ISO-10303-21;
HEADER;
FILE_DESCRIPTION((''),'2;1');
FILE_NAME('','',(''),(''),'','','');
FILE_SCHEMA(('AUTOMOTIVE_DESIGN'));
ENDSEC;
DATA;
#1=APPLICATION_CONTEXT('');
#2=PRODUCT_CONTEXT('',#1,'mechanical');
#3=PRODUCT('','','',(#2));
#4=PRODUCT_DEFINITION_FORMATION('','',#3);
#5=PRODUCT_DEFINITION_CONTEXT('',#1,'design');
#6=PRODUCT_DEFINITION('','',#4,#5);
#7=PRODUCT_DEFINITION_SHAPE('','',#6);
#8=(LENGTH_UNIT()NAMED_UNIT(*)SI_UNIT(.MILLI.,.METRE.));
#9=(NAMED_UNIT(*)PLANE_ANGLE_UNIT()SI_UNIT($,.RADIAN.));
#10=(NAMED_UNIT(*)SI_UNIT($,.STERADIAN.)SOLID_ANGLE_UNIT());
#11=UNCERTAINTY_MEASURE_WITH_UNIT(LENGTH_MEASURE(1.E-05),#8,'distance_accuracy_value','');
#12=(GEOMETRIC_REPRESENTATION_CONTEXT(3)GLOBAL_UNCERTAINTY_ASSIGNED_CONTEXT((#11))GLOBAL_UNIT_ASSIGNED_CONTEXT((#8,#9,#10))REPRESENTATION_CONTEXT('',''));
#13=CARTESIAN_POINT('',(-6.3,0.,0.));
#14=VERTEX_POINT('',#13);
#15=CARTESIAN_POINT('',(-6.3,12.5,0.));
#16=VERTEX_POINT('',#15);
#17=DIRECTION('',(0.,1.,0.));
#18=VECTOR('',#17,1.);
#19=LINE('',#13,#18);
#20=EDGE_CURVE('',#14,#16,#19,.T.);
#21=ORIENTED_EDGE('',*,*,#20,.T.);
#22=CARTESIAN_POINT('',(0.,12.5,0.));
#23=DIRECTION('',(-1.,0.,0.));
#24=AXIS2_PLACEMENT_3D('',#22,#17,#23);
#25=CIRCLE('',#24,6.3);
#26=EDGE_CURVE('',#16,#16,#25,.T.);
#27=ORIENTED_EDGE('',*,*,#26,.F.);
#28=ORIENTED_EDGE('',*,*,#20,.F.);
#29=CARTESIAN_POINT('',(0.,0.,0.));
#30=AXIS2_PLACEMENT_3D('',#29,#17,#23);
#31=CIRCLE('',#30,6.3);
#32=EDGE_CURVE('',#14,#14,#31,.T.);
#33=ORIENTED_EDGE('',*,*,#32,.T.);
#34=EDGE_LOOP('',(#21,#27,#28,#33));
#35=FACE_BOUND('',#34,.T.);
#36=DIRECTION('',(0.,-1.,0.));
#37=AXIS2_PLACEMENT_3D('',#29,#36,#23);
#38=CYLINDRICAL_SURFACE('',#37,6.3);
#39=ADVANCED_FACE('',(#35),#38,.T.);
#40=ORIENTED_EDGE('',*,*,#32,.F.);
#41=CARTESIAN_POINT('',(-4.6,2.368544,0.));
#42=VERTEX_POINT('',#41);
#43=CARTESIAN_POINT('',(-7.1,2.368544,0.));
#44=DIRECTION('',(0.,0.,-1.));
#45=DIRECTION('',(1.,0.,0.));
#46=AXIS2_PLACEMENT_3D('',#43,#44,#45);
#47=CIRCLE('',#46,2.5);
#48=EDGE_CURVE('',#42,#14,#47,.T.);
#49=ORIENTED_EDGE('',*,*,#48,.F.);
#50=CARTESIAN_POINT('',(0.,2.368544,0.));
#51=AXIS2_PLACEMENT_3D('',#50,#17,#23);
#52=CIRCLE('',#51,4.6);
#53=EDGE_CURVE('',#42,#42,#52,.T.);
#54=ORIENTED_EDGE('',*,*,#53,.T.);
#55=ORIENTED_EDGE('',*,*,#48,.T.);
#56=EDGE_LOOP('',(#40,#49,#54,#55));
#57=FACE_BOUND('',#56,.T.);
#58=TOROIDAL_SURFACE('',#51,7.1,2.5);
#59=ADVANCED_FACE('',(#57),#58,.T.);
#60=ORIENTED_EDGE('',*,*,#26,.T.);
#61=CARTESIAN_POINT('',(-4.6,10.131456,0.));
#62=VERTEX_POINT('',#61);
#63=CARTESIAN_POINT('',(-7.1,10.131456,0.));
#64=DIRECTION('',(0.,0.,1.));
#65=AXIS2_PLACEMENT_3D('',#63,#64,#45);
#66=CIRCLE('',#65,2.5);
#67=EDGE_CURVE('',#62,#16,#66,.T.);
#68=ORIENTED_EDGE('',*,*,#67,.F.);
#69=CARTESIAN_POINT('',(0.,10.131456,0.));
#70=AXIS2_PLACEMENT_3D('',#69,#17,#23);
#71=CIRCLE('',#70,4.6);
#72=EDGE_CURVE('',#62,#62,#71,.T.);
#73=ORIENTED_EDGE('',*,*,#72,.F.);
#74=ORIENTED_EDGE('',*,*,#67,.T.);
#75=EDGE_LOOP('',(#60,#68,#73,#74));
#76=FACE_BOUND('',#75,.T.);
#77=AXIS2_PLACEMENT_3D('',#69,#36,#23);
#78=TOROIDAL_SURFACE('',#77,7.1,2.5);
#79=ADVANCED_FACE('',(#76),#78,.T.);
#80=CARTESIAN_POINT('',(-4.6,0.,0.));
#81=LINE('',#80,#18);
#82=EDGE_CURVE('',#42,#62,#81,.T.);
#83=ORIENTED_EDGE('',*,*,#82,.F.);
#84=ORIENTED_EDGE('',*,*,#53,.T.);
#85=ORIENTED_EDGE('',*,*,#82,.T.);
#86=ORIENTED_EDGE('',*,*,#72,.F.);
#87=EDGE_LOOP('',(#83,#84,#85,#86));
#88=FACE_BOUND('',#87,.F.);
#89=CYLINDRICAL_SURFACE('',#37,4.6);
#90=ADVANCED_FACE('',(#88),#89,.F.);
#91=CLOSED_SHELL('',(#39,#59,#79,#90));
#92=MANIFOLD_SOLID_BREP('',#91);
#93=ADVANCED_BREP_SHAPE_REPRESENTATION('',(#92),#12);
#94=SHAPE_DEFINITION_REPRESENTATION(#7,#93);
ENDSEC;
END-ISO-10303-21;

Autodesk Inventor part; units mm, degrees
ref_plane "YZ Plane" through (0, 0, 0) normal (1, 0, 0) x (0, 1, 0)
ref_plane "XZ Plane" through (0, 0, 0) normal (0, 1, 0) x (-1, 0, 0)
ref_plane "XY Plane" through (0, 0, 0) normal (0, 0, 1) x (1, 0, 0)
sketch "Sketch2" plane through (0, 0, 0) normal (0, 1, 0) x (-1, 0, 0)
  circle A0 centre (0, 0) radius 4.6
  circle A1 centre (0, 0) radius 6.3
  dimension "d14" = 9.2
  dimension "d15" = 1.7
extrude "Extrusion1" add sketch "Sketch2" along normal blind 12.5
fillet "Fillet1" radius 2.5 2 edges at (4.6, 12.5, 0) (4.6, 0, 0)
properties part number "Deck_Bushing_Liner" material "Stainless Steel"
